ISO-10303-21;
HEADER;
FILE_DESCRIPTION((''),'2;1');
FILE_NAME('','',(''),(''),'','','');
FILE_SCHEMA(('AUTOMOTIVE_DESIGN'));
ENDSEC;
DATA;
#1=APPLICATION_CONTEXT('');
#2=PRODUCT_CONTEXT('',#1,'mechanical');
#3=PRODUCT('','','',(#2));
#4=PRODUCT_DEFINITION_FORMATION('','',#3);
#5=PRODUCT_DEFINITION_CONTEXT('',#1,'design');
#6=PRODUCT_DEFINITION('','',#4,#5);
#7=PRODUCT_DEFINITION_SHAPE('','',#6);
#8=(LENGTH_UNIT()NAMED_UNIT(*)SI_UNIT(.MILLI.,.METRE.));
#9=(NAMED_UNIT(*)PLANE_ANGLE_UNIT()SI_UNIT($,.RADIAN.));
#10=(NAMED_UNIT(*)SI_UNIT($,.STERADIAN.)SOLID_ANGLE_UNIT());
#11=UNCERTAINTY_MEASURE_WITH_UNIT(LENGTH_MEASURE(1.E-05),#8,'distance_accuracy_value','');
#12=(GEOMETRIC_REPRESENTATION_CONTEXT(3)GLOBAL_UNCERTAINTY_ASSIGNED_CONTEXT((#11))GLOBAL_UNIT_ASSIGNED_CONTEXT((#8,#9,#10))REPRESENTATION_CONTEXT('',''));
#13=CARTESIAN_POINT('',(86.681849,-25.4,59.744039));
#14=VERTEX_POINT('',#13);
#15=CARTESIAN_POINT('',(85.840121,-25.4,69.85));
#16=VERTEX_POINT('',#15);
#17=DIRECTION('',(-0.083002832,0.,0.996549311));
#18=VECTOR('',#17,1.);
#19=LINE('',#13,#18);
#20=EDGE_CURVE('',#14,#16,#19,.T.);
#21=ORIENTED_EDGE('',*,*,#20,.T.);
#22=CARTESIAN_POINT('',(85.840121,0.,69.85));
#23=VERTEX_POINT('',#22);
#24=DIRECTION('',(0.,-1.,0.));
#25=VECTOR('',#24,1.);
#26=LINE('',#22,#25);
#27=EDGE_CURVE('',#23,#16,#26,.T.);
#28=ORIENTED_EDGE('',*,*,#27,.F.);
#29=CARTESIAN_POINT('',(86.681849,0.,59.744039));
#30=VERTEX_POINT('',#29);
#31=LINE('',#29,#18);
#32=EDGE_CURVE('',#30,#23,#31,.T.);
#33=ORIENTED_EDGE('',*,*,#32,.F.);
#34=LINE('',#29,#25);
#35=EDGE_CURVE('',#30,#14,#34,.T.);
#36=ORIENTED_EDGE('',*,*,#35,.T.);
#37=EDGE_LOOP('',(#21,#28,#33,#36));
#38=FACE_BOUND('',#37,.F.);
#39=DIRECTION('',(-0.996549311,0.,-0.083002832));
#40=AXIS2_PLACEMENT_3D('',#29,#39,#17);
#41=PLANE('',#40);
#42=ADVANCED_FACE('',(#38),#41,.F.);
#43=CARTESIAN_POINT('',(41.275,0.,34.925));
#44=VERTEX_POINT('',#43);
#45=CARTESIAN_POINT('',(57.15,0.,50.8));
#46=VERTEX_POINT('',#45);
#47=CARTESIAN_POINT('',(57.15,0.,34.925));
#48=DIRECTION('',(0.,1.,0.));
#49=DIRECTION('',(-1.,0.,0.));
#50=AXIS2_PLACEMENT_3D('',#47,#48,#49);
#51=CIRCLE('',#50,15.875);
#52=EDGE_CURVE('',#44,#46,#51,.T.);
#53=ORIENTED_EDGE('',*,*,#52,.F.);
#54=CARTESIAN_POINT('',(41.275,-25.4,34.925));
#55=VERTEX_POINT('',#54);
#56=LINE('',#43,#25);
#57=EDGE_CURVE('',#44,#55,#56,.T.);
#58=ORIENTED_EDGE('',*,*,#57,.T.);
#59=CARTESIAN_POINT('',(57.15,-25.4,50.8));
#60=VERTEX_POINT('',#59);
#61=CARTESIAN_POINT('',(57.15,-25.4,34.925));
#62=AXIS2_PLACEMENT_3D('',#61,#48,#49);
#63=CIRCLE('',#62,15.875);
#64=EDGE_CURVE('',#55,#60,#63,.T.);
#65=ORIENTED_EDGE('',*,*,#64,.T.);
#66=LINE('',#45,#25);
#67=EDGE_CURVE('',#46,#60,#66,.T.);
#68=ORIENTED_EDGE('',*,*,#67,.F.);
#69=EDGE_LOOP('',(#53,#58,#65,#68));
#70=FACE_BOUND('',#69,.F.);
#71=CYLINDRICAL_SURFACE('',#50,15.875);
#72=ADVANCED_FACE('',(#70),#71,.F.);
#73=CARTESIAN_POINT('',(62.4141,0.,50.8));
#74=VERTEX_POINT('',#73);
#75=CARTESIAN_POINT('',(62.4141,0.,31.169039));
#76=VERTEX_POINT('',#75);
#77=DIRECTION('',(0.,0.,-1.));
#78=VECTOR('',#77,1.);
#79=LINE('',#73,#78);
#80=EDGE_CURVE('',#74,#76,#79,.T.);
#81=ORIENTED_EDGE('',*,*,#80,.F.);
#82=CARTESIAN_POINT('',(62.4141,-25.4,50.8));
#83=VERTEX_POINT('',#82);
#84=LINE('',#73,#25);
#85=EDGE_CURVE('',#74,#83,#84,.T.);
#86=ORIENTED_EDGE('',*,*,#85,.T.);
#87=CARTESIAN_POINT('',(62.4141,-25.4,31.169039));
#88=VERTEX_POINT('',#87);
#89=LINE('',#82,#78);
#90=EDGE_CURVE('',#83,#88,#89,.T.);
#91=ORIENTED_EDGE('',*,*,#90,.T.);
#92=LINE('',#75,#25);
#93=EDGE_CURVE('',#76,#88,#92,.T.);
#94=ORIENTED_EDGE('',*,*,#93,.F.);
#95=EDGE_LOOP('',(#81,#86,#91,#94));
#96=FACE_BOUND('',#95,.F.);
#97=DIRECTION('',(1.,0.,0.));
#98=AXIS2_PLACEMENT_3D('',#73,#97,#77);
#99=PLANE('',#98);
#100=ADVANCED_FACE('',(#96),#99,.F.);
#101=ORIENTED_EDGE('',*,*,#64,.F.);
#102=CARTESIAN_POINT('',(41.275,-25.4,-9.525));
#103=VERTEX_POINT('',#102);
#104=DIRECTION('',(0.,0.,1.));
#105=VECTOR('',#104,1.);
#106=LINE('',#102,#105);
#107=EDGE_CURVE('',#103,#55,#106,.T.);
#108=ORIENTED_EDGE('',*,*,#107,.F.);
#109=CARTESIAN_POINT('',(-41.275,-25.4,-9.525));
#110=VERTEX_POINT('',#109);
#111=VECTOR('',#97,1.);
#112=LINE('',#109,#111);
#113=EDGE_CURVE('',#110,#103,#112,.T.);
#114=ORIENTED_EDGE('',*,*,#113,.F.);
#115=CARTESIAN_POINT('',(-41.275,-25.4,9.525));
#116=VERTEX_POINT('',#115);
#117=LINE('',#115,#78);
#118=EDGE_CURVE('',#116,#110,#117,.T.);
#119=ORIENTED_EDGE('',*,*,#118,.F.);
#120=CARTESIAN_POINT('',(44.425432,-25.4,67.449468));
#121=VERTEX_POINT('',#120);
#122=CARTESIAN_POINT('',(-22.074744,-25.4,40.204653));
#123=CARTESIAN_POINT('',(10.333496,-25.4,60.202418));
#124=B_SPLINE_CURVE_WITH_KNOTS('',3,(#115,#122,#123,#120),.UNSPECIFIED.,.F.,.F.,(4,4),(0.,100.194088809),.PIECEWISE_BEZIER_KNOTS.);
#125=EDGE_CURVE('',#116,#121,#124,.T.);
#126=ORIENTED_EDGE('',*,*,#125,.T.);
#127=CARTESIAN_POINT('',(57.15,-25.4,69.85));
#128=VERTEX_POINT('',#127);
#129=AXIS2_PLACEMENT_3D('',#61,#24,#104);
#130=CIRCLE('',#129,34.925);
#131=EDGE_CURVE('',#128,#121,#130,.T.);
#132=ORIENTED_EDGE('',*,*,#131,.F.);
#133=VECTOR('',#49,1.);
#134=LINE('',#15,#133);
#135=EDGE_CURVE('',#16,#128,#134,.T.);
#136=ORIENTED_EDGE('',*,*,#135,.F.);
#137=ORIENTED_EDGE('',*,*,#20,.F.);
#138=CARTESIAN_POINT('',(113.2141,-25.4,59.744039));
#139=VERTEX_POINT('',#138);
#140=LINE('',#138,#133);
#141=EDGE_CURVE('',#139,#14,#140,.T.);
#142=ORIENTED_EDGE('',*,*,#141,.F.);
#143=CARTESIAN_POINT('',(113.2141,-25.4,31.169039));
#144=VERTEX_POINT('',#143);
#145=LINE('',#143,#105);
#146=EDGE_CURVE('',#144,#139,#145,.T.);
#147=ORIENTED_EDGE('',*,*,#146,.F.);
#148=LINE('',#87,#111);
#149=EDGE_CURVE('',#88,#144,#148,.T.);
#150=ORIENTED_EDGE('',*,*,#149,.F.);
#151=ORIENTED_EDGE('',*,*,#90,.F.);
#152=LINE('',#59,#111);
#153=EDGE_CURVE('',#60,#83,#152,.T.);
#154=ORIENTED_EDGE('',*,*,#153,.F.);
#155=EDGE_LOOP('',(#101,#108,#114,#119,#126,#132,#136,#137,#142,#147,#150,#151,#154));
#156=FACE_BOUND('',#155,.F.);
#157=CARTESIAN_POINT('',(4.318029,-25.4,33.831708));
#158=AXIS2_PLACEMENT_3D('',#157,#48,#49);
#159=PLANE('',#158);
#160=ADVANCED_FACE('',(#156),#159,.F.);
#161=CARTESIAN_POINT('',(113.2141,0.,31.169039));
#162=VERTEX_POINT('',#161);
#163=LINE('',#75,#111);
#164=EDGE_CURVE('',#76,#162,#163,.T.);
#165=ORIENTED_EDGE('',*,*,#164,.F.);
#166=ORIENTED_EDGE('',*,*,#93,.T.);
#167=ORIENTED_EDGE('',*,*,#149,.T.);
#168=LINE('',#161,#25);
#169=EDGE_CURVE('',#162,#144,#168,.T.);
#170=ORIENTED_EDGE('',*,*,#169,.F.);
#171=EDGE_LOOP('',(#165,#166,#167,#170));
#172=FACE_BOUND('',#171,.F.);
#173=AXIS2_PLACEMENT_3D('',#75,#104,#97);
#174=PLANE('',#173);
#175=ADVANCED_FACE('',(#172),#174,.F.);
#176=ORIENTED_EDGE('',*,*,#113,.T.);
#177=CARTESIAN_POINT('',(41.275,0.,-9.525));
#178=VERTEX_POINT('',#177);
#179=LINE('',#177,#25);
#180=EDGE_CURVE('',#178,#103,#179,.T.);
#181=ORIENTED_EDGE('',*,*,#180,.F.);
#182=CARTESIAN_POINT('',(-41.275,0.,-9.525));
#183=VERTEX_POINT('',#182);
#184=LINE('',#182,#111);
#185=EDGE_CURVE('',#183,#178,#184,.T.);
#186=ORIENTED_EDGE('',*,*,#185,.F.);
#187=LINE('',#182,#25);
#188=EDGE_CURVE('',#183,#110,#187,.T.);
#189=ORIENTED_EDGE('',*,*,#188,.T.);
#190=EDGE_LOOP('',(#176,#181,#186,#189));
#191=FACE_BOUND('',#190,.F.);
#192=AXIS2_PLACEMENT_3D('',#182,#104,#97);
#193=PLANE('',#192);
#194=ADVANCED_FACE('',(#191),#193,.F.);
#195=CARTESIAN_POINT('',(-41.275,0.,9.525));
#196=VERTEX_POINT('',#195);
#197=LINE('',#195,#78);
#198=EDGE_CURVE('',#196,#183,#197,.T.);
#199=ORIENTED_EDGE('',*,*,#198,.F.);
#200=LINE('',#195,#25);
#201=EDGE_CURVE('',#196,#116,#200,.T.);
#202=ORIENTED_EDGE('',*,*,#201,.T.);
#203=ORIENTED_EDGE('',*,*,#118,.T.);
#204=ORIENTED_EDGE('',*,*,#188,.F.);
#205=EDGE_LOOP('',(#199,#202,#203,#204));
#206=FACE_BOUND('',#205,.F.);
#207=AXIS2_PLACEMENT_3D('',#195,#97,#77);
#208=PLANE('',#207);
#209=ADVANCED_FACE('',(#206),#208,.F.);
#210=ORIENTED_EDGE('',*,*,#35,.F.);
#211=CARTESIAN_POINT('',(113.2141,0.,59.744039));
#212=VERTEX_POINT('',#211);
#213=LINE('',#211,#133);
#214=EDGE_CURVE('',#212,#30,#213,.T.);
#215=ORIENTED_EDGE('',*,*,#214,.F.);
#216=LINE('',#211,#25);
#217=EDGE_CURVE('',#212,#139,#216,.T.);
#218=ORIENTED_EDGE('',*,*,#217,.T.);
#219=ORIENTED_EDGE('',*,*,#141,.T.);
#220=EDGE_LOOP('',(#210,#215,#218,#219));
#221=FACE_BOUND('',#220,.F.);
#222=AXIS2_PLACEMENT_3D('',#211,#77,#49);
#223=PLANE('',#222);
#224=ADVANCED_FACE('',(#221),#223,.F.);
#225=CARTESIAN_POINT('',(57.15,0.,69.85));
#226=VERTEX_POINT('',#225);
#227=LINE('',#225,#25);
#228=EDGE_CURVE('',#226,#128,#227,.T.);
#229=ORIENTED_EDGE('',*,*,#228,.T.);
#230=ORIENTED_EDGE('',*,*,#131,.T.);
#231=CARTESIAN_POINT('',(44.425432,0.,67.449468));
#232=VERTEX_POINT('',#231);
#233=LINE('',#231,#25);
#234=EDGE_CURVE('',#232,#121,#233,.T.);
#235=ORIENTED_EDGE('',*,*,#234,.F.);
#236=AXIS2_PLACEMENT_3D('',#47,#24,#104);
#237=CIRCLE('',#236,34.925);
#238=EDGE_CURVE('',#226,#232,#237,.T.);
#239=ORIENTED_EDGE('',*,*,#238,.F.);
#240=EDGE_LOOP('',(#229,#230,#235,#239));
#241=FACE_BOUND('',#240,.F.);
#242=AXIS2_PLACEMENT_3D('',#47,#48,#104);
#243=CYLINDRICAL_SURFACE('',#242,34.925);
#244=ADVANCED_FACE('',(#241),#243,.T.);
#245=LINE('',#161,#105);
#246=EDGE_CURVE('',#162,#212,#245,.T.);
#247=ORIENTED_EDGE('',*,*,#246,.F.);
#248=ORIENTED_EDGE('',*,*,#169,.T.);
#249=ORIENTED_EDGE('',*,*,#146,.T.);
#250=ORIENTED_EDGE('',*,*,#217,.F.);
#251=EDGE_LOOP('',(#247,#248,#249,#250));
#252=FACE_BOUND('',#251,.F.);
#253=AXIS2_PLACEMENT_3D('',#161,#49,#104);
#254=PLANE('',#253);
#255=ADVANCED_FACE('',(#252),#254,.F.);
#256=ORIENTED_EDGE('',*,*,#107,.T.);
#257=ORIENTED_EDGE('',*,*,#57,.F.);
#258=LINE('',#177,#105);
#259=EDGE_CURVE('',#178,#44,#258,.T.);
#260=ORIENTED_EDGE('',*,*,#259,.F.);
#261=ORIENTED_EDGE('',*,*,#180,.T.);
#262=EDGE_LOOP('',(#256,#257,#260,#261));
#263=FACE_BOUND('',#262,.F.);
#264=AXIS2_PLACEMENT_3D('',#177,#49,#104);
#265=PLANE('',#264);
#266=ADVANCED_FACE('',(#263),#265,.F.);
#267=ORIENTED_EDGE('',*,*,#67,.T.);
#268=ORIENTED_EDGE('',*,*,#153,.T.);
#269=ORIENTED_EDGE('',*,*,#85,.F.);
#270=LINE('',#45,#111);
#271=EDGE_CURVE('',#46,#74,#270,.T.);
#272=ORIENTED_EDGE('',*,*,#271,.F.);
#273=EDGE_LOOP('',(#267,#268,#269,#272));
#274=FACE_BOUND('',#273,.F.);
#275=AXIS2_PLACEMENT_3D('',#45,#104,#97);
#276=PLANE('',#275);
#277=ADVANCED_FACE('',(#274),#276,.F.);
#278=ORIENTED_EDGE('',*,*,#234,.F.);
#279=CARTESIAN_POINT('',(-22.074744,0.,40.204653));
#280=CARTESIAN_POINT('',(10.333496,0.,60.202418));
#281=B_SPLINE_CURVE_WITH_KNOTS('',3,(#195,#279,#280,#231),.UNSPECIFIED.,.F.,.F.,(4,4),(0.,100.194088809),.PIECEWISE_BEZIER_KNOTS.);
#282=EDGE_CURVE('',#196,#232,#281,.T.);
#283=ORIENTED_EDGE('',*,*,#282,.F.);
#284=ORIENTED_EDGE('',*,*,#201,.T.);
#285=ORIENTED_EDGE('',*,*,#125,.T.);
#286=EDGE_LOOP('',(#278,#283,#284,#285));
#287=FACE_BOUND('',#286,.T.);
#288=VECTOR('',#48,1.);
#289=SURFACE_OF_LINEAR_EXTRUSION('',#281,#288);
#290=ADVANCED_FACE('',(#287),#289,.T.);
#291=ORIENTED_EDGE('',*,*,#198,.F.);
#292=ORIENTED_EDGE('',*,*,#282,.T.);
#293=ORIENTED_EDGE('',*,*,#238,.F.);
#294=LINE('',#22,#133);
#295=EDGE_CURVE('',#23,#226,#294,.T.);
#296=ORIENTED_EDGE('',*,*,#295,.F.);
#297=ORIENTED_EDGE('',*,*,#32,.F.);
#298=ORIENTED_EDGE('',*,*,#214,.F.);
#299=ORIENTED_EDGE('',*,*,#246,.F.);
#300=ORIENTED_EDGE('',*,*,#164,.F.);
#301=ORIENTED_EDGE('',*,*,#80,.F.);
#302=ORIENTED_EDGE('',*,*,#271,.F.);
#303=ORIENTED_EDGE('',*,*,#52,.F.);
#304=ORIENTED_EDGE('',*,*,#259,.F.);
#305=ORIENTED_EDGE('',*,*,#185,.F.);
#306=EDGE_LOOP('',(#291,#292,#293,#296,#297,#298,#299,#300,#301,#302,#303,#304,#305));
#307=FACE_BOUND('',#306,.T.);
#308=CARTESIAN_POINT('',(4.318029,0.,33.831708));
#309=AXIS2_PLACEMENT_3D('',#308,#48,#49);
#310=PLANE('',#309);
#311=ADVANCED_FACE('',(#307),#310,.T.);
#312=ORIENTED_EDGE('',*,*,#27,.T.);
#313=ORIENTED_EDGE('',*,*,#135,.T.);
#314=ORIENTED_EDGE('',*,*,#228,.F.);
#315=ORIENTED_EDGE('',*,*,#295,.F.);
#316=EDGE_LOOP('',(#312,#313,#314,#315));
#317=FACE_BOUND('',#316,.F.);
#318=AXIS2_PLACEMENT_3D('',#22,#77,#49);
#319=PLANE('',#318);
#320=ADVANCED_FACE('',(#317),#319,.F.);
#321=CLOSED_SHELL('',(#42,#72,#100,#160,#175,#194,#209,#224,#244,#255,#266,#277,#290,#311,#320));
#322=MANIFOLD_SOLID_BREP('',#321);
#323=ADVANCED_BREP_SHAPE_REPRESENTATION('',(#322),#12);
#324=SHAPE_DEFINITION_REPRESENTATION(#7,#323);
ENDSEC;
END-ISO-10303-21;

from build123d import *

# Parameters (mm, degrees)
F1_DEPTH = 25.4


with BuildPart() as f1:
    # F0 (on Front) → F1 (new body)
    with BuildSketch(Plane.XZ):
        with BuildLine():
            add(Edge.make_bspline(
                [(-41.275, 9.525), (-22.0747437676, 40.2046527133), (10.3334958868, 60.2024181647), (44.4254317337, 67.4494675196)],
                knots=[0, 0, 0, 0, 100.1940888091, 100.1940888091, 100.1940888091, 100.1940888091], degree=3))
            Line((-41.275, 9.525), (22.225, 9.525))
            Line((22.225, 9.5250000022), (22.225, 34.925))
            ThreePointArc((22.225, 34.925), (28.3041929243, 54.6144651819), (44.4254317337, 67.4494675196))
        make_face()
        Polygon((22.225, 9.525), (-41.275, 9.525), (-41.275, -9.525), (41.275, -9.525), (41.275, 9.525), align=None)
        with BuildLine():
            Line((22.225, 34.925), (22.225, 9.5250000022))
            Line((22.225, 9.525), (41.275, 9.525))
            Line((41.275, 9.525), (41.275, 34.925))
            ThreePointArc((41.275, 34.925), (45.9246798487, 46.1503201513), (57.15, 50.8))
            Line((57.15, 50.8), (62.4140998637, 50.8))
            Line((62.4140998637, 50.8), (62.4140998637, 59.7440389732))
            Line((62.4140998637, 59.7440389732), (86.6818488397, 59.7440389732))
            Line((86.6818488397, 59.7440389732), (85.8401209116, 69.85))
            Line((85.8401209116, 69.85), (59.9131250273, 69.85))
            add(Edge.make_bspline(
                [(44.4254317337, 67.4494675196), (49.5629070715, 68.5415597229), (54.7386173045, 69.3440971379), (59.9131250273, 69.85)],
                knots=[100.1940888091, 100.1940888091, 100.1940888091, 100.1940888091, 115.2928107637, 115.2928107637, 115.2928107637, 115.2928107637], degree=3))
            ThreePointArc((44.4254317337, 67.4494675196), (28.3041929243, 54.6144651819), (22.225, 34.925))
        make_face()
        with BuildLine():
            ThreePointArc((57.15, 69.85), (50.675488556, 69.2446201401), (44.4254317337, 67.4494675196))
            add(Edge.make_bspline(
                [(44.4254317337, 67.4494675196), (49.5629070715, 68.5415597229), (54.7386173045, 69.3440971379), (59.9131250273, 69.85)],
                knots=[100.1940888091, 100.1940888091, 100.1940888091, 100.1940888091, 115.2928107637, 115.2928107637, 115.2928107637, 115.2928107637], degree=3))
            Line((59.9131250273, 69.85), (57.15, 69.85))
        make_face()
        Polygon((87.4268, 50.8), (86.6818488397, 59.7440389732), (62.4140998637, 59.7440389732), (62.4140998637, 50.8), align=None)
        Polygon((113.2140998637, 59.7440389732), (86.6818488397, 59.7440389732), (87.4268, 50.8), (62.4140998637, 50.8), (62.4140998637, 31.1690389732), (113.2140998637, 31.1690389732), align=None)
    extrude(amount=F1_DEPTH)


solid = f1.part
